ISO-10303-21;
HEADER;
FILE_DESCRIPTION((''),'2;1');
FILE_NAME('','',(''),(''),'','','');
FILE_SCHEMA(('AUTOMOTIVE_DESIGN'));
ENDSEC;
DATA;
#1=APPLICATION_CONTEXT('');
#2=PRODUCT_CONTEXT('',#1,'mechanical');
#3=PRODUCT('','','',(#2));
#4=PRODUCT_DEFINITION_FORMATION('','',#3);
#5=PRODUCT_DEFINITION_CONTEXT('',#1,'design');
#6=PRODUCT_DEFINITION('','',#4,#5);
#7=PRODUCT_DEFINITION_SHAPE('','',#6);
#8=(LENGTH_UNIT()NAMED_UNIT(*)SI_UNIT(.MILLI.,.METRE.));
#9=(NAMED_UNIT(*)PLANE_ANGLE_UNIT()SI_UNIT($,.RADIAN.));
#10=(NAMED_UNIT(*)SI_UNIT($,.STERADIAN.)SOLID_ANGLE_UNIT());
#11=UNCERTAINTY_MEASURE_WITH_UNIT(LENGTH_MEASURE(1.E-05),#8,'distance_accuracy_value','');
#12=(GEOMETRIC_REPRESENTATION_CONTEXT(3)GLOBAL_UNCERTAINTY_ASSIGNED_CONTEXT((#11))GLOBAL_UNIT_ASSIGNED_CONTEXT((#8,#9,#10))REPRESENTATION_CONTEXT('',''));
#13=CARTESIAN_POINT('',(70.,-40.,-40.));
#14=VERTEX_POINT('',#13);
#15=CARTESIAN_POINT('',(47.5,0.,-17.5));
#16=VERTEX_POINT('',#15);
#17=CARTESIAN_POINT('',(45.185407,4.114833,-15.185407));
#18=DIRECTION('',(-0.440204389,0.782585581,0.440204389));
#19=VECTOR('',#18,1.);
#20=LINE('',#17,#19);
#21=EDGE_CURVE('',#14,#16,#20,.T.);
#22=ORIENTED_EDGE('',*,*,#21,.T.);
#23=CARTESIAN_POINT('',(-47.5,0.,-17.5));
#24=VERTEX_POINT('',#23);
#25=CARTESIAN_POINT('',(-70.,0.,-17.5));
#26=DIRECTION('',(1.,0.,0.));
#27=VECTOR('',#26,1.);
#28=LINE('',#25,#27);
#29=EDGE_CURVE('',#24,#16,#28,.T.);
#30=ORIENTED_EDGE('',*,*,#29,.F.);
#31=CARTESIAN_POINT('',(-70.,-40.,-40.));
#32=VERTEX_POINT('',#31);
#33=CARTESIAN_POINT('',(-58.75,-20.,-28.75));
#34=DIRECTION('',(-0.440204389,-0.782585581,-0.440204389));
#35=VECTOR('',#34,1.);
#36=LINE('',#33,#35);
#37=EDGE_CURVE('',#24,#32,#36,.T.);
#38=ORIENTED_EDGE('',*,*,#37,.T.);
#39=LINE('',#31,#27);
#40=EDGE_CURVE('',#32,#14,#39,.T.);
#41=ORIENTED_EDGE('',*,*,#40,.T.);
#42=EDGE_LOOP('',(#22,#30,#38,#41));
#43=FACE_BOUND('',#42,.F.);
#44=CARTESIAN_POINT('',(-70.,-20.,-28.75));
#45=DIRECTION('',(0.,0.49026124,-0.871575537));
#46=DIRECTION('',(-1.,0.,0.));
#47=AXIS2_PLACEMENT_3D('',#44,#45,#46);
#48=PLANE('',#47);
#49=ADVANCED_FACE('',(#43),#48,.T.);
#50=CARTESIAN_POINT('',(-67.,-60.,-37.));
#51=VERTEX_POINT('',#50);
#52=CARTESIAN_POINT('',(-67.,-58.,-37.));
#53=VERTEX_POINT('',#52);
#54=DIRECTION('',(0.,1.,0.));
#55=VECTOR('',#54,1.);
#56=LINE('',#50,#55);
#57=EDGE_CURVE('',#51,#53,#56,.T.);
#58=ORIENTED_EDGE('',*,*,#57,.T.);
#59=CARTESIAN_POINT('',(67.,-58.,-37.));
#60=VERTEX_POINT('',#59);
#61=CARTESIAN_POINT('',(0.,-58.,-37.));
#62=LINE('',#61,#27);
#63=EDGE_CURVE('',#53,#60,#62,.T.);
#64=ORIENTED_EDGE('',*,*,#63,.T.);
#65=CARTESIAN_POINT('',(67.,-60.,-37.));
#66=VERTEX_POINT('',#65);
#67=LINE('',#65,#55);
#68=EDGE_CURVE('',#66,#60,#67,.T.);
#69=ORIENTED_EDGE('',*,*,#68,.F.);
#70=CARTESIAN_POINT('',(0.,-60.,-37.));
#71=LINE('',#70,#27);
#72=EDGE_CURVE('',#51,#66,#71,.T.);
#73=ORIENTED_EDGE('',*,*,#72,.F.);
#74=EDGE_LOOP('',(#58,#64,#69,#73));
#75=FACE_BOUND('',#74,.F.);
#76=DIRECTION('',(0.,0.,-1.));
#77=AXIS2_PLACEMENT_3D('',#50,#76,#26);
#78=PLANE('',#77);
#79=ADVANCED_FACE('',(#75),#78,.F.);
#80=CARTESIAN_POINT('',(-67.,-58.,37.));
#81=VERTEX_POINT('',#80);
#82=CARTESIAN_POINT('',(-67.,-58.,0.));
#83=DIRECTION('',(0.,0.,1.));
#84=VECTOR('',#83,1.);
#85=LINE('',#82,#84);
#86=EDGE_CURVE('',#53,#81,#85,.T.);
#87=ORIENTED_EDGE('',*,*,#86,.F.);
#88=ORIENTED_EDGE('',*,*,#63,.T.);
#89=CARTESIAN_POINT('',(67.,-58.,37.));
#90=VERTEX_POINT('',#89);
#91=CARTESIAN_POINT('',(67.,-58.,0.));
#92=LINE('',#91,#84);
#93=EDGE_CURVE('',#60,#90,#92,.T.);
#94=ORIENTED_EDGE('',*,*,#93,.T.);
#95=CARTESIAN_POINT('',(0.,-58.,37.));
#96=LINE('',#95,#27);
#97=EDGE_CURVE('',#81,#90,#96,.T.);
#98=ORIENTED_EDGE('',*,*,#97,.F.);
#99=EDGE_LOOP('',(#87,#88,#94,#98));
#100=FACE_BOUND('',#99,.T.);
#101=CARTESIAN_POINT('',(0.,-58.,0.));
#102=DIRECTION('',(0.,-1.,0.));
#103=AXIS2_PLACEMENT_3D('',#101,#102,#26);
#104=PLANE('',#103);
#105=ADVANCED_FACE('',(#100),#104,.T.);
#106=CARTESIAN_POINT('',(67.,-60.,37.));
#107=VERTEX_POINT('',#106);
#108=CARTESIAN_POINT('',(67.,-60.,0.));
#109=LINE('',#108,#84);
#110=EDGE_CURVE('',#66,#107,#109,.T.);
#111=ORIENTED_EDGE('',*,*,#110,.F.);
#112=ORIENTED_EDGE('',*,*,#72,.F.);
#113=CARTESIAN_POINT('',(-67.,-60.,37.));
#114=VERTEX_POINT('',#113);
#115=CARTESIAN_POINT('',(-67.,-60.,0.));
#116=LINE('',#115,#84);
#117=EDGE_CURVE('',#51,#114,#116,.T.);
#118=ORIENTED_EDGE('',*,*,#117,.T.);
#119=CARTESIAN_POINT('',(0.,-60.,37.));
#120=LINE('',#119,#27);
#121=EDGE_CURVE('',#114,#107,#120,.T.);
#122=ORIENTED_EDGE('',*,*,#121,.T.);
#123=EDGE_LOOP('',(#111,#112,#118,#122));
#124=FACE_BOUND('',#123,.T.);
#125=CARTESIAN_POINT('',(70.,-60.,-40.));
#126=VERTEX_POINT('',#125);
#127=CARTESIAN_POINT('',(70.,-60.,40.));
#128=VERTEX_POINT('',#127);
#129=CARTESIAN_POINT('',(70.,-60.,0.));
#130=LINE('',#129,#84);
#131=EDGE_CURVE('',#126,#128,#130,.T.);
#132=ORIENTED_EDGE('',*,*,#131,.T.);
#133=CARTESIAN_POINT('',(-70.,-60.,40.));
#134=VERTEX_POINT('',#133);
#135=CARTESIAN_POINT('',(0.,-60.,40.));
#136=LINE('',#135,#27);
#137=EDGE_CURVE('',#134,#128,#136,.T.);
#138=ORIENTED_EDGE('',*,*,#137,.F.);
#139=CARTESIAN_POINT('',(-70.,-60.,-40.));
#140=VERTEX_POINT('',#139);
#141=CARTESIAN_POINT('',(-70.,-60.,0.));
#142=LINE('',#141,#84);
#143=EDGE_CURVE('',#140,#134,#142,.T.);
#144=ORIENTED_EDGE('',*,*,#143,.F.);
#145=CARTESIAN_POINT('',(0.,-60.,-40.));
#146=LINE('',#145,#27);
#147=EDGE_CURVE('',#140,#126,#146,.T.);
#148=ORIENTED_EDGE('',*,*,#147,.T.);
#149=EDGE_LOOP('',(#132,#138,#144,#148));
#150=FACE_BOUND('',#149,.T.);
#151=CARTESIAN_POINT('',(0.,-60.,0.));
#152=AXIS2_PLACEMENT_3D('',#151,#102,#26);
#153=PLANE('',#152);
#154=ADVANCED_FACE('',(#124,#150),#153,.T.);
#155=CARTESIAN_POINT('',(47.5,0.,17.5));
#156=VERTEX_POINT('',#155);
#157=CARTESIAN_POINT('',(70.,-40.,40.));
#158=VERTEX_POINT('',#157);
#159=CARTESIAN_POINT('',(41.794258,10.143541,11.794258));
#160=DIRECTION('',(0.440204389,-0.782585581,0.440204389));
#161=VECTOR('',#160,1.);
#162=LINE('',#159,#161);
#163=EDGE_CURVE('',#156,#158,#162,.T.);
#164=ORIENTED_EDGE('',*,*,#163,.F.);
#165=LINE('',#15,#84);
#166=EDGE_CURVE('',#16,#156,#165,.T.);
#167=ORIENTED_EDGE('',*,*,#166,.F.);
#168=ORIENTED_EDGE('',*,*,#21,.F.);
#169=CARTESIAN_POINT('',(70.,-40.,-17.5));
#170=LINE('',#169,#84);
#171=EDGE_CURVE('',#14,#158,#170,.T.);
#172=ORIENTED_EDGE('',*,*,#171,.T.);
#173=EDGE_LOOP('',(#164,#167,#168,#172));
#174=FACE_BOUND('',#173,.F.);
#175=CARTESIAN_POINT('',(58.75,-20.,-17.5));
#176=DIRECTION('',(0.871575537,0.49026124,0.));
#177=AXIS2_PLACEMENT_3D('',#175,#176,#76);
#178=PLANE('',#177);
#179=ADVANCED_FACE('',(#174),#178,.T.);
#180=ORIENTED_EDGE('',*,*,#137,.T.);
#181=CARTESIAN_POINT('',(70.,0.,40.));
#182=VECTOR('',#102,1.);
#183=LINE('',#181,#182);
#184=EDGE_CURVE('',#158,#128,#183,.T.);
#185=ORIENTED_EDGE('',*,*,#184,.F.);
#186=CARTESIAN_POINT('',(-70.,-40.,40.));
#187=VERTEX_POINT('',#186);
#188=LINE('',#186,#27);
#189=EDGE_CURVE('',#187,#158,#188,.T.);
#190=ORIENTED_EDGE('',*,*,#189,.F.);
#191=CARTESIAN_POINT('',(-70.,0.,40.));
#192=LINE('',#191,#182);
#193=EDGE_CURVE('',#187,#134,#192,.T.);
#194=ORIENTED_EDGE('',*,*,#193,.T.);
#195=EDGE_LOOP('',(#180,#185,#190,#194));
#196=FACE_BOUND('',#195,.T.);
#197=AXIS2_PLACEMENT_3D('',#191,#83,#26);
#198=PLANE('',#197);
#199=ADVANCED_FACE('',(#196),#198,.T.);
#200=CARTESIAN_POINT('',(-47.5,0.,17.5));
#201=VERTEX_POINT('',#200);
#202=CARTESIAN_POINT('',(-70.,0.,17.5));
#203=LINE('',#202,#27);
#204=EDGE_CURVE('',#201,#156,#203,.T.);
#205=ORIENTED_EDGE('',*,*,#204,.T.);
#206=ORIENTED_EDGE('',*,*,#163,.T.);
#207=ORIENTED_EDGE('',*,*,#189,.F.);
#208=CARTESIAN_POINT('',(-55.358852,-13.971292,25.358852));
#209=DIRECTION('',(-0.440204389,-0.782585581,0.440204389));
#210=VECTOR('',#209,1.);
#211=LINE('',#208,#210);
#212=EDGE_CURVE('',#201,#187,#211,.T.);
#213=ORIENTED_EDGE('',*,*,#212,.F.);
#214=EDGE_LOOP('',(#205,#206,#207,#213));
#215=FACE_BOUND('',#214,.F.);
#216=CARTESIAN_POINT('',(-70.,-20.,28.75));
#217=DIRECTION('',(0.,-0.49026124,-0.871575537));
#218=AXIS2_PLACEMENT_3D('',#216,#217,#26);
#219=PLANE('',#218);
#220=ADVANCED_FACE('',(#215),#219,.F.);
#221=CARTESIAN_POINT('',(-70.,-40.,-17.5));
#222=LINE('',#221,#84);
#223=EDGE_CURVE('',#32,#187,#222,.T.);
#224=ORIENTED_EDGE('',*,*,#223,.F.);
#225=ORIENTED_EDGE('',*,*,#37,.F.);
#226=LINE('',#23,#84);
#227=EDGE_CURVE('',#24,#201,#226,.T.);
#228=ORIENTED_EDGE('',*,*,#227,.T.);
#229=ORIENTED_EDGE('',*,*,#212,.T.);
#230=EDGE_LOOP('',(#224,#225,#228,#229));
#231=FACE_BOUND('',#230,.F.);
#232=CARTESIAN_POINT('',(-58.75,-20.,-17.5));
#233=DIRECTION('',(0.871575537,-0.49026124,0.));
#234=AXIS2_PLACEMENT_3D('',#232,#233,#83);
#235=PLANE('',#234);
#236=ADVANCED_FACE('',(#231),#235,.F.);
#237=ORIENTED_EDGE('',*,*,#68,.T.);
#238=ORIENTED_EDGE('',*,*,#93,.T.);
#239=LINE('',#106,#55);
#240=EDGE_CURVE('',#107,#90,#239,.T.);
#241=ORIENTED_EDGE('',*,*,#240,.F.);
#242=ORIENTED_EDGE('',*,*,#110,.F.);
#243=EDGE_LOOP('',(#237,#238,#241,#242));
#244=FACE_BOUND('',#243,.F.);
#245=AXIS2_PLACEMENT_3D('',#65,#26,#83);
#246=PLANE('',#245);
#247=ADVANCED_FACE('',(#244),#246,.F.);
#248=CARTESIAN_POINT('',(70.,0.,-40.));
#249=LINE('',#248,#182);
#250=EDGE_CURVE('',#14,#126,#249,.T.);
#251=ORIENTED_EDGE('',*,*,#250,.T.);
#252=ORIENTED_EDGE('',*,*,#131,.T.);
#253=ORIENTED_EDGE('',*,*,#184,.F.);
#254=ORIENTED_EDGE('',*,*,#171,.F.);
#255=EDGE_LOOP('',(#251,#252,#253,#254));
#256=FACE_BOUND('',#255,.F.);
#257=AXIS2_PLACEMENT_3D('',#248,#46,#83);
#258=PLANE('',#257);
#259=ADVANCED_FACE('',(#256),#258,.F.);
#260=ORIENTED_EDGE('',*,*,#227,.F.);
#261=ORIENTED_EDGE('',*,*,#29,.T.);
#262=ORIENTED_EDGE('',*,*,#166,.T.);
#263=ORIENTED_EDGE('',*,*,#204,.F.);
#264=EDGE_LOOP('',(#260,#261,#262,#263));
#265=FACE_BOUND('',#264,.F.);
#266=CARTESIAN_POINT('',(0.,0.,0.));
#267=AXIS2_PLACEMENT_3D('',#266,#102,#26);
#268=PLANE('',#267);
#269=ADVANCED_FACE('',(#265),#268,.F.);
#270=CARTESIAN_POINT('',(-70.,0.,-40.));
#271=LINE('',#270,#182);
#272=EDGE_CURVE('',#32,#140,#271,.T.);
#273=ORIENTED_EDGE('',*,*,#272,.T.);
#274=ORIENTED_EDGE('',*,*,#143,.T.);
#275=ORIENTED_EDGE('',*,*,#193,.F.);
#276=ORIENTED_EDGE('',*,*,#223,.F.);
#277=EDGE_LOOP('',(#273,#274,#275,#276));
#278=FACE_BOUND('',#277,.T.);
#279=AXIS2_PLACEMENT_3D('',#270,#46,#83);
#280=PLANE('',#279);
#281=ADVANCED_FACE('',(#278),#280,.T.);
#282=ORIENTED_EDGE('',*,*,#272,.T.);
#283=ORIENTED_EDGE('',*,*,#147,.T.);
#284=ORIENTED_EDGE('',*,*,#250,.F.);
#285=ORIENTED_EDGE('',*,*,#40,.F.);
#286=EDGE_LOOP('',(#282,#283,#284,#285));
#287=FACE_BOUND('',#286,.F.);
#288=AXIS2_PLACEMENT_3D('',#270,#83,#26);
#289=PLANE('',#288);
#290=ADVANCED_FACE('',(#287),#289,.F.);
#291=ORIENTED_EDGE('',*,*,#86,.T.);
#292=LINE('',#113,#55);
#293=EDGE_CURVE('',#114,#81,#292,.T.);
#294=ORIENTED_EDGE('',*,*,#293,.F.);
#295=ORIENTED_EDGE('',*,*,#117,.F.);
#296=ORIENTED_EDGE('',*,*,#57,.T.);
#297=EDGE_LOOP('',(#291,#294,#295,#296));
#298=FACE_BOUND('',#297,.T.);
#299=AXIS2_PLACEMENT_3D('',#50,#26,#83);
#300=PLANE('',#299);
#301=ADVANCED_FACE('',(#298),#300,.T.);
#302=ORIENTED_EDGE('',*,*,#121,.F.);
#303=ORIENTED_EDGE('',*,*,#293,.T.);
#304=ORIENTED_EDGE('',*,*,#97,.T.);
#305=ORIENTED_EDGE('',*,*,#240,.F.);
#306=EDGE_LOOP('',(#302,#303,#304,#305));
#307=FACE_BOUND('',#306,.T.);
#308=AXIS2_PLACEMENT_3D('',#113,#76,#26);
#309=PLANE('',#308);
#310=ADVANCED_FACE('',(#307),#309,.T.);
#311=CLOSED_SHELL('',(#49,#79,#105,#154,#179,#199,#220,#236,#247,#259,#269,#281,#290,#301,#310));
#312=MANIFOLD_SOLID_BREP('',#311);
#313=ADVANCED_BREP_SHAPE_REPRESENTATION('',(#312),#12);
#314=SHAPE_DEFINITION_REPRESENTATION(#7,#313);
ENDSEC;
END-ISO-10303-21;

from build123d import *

# Parameters (mm, degrees)
F0_W        = 140
F0_H        = 80
F1_DEPTH    = 60
F2_C1_SIZE2 = 22.5
F2_C1_SIZE  = 40
F2_C2_SIZE2 = 22.5
F2_C2_SIZE  = 40
F2_C3_SIZE2 = 40
F2_C3_SIZE  = 22.5
F2_C4_SIZE2 = 40
F2_C4_SIZE  = 22.5
F3_W        = 134
F3_H        = 74
F4_DEPTH    = 2
F5_DEPTH    = 2


with BuildPart() as f1:
    # F0 (on Front) → F1 (new body)
    with BuildSketch(Plane.XZ):
        Rectangle(F0_W, F0_H)
    extrude(amount=F1_DEPTH)

    # F2: chamfer of 22.5 x 40 on 4 edges, made by hand

    # F2_c1
    f2_c1_edges = [f1.edges().sort_by_distance(p)[0] for p in [
        (0, 0, -40),
    ]]
    f2_c1_side = f1.faces().sort_by_distance((0, -0.45, -40))[0]
    chamfer(f2_c1_edges, length=F2_C1_SIZE, length2=F2_C1_SIZE2, reference=f2_c1_side)

    # F2_c2
    f2_c2_edges = [f1.edges().sort_by_distance(p)[0] for p in [
        (70, 0, 11.25),
    ]]
    f2_c2_side = f1.faces().sort_by_distance((70, -0.45, 11.25))[0]
    chamfer(f2_c2_edges, length=F2_C2_SIZE, length2=F2_C2_SIZE2, reference=f2_c2_side)

    # F2_c3
    f2_c3_edges = [f1.edges().sort_by_distance(p)[0] for p in [
        (-11.25, 0, 40),
    ]]
    f2_c3_side = f1.faces().sort_by_distance((-11.25, 0, 39.55))[0]
    chamfer(f2_c3_edges, length=F2_C3_SIZE, length2=F2_C3_SIZE2, reference=f2_c3_side)

    # F2_c4
    f2_c4_edges = [f1.edges().sort_by_distance(p)[0] for p in [
        (-70, 0, 0),
    ]]
    f2_c4_side = f1.faces().sort_by_distance((-69.55, 0, 0))[0]
    chamfer(f2_c4_edges, length=F2_C4_SIZE, length2=F2_C4_SIZE2, reference=f2_c4_side)

    # F3 (on face) → F4 (join)
    with BuildSketch(Plane.XZ.offset(60)):
        Rectangle(F3_W, F3_H)
    extrude(amount=-F4_DEPTH)

    # F3 (on face) → F5 (cut)
    with BuildSketch(Plane.XZ.offset(60)):
        Rectangle(F3_W, F3_H)
    extrude(amount=-F5_DEPTH, mode=Mode.SUBTRACT)


solid = f1.part
